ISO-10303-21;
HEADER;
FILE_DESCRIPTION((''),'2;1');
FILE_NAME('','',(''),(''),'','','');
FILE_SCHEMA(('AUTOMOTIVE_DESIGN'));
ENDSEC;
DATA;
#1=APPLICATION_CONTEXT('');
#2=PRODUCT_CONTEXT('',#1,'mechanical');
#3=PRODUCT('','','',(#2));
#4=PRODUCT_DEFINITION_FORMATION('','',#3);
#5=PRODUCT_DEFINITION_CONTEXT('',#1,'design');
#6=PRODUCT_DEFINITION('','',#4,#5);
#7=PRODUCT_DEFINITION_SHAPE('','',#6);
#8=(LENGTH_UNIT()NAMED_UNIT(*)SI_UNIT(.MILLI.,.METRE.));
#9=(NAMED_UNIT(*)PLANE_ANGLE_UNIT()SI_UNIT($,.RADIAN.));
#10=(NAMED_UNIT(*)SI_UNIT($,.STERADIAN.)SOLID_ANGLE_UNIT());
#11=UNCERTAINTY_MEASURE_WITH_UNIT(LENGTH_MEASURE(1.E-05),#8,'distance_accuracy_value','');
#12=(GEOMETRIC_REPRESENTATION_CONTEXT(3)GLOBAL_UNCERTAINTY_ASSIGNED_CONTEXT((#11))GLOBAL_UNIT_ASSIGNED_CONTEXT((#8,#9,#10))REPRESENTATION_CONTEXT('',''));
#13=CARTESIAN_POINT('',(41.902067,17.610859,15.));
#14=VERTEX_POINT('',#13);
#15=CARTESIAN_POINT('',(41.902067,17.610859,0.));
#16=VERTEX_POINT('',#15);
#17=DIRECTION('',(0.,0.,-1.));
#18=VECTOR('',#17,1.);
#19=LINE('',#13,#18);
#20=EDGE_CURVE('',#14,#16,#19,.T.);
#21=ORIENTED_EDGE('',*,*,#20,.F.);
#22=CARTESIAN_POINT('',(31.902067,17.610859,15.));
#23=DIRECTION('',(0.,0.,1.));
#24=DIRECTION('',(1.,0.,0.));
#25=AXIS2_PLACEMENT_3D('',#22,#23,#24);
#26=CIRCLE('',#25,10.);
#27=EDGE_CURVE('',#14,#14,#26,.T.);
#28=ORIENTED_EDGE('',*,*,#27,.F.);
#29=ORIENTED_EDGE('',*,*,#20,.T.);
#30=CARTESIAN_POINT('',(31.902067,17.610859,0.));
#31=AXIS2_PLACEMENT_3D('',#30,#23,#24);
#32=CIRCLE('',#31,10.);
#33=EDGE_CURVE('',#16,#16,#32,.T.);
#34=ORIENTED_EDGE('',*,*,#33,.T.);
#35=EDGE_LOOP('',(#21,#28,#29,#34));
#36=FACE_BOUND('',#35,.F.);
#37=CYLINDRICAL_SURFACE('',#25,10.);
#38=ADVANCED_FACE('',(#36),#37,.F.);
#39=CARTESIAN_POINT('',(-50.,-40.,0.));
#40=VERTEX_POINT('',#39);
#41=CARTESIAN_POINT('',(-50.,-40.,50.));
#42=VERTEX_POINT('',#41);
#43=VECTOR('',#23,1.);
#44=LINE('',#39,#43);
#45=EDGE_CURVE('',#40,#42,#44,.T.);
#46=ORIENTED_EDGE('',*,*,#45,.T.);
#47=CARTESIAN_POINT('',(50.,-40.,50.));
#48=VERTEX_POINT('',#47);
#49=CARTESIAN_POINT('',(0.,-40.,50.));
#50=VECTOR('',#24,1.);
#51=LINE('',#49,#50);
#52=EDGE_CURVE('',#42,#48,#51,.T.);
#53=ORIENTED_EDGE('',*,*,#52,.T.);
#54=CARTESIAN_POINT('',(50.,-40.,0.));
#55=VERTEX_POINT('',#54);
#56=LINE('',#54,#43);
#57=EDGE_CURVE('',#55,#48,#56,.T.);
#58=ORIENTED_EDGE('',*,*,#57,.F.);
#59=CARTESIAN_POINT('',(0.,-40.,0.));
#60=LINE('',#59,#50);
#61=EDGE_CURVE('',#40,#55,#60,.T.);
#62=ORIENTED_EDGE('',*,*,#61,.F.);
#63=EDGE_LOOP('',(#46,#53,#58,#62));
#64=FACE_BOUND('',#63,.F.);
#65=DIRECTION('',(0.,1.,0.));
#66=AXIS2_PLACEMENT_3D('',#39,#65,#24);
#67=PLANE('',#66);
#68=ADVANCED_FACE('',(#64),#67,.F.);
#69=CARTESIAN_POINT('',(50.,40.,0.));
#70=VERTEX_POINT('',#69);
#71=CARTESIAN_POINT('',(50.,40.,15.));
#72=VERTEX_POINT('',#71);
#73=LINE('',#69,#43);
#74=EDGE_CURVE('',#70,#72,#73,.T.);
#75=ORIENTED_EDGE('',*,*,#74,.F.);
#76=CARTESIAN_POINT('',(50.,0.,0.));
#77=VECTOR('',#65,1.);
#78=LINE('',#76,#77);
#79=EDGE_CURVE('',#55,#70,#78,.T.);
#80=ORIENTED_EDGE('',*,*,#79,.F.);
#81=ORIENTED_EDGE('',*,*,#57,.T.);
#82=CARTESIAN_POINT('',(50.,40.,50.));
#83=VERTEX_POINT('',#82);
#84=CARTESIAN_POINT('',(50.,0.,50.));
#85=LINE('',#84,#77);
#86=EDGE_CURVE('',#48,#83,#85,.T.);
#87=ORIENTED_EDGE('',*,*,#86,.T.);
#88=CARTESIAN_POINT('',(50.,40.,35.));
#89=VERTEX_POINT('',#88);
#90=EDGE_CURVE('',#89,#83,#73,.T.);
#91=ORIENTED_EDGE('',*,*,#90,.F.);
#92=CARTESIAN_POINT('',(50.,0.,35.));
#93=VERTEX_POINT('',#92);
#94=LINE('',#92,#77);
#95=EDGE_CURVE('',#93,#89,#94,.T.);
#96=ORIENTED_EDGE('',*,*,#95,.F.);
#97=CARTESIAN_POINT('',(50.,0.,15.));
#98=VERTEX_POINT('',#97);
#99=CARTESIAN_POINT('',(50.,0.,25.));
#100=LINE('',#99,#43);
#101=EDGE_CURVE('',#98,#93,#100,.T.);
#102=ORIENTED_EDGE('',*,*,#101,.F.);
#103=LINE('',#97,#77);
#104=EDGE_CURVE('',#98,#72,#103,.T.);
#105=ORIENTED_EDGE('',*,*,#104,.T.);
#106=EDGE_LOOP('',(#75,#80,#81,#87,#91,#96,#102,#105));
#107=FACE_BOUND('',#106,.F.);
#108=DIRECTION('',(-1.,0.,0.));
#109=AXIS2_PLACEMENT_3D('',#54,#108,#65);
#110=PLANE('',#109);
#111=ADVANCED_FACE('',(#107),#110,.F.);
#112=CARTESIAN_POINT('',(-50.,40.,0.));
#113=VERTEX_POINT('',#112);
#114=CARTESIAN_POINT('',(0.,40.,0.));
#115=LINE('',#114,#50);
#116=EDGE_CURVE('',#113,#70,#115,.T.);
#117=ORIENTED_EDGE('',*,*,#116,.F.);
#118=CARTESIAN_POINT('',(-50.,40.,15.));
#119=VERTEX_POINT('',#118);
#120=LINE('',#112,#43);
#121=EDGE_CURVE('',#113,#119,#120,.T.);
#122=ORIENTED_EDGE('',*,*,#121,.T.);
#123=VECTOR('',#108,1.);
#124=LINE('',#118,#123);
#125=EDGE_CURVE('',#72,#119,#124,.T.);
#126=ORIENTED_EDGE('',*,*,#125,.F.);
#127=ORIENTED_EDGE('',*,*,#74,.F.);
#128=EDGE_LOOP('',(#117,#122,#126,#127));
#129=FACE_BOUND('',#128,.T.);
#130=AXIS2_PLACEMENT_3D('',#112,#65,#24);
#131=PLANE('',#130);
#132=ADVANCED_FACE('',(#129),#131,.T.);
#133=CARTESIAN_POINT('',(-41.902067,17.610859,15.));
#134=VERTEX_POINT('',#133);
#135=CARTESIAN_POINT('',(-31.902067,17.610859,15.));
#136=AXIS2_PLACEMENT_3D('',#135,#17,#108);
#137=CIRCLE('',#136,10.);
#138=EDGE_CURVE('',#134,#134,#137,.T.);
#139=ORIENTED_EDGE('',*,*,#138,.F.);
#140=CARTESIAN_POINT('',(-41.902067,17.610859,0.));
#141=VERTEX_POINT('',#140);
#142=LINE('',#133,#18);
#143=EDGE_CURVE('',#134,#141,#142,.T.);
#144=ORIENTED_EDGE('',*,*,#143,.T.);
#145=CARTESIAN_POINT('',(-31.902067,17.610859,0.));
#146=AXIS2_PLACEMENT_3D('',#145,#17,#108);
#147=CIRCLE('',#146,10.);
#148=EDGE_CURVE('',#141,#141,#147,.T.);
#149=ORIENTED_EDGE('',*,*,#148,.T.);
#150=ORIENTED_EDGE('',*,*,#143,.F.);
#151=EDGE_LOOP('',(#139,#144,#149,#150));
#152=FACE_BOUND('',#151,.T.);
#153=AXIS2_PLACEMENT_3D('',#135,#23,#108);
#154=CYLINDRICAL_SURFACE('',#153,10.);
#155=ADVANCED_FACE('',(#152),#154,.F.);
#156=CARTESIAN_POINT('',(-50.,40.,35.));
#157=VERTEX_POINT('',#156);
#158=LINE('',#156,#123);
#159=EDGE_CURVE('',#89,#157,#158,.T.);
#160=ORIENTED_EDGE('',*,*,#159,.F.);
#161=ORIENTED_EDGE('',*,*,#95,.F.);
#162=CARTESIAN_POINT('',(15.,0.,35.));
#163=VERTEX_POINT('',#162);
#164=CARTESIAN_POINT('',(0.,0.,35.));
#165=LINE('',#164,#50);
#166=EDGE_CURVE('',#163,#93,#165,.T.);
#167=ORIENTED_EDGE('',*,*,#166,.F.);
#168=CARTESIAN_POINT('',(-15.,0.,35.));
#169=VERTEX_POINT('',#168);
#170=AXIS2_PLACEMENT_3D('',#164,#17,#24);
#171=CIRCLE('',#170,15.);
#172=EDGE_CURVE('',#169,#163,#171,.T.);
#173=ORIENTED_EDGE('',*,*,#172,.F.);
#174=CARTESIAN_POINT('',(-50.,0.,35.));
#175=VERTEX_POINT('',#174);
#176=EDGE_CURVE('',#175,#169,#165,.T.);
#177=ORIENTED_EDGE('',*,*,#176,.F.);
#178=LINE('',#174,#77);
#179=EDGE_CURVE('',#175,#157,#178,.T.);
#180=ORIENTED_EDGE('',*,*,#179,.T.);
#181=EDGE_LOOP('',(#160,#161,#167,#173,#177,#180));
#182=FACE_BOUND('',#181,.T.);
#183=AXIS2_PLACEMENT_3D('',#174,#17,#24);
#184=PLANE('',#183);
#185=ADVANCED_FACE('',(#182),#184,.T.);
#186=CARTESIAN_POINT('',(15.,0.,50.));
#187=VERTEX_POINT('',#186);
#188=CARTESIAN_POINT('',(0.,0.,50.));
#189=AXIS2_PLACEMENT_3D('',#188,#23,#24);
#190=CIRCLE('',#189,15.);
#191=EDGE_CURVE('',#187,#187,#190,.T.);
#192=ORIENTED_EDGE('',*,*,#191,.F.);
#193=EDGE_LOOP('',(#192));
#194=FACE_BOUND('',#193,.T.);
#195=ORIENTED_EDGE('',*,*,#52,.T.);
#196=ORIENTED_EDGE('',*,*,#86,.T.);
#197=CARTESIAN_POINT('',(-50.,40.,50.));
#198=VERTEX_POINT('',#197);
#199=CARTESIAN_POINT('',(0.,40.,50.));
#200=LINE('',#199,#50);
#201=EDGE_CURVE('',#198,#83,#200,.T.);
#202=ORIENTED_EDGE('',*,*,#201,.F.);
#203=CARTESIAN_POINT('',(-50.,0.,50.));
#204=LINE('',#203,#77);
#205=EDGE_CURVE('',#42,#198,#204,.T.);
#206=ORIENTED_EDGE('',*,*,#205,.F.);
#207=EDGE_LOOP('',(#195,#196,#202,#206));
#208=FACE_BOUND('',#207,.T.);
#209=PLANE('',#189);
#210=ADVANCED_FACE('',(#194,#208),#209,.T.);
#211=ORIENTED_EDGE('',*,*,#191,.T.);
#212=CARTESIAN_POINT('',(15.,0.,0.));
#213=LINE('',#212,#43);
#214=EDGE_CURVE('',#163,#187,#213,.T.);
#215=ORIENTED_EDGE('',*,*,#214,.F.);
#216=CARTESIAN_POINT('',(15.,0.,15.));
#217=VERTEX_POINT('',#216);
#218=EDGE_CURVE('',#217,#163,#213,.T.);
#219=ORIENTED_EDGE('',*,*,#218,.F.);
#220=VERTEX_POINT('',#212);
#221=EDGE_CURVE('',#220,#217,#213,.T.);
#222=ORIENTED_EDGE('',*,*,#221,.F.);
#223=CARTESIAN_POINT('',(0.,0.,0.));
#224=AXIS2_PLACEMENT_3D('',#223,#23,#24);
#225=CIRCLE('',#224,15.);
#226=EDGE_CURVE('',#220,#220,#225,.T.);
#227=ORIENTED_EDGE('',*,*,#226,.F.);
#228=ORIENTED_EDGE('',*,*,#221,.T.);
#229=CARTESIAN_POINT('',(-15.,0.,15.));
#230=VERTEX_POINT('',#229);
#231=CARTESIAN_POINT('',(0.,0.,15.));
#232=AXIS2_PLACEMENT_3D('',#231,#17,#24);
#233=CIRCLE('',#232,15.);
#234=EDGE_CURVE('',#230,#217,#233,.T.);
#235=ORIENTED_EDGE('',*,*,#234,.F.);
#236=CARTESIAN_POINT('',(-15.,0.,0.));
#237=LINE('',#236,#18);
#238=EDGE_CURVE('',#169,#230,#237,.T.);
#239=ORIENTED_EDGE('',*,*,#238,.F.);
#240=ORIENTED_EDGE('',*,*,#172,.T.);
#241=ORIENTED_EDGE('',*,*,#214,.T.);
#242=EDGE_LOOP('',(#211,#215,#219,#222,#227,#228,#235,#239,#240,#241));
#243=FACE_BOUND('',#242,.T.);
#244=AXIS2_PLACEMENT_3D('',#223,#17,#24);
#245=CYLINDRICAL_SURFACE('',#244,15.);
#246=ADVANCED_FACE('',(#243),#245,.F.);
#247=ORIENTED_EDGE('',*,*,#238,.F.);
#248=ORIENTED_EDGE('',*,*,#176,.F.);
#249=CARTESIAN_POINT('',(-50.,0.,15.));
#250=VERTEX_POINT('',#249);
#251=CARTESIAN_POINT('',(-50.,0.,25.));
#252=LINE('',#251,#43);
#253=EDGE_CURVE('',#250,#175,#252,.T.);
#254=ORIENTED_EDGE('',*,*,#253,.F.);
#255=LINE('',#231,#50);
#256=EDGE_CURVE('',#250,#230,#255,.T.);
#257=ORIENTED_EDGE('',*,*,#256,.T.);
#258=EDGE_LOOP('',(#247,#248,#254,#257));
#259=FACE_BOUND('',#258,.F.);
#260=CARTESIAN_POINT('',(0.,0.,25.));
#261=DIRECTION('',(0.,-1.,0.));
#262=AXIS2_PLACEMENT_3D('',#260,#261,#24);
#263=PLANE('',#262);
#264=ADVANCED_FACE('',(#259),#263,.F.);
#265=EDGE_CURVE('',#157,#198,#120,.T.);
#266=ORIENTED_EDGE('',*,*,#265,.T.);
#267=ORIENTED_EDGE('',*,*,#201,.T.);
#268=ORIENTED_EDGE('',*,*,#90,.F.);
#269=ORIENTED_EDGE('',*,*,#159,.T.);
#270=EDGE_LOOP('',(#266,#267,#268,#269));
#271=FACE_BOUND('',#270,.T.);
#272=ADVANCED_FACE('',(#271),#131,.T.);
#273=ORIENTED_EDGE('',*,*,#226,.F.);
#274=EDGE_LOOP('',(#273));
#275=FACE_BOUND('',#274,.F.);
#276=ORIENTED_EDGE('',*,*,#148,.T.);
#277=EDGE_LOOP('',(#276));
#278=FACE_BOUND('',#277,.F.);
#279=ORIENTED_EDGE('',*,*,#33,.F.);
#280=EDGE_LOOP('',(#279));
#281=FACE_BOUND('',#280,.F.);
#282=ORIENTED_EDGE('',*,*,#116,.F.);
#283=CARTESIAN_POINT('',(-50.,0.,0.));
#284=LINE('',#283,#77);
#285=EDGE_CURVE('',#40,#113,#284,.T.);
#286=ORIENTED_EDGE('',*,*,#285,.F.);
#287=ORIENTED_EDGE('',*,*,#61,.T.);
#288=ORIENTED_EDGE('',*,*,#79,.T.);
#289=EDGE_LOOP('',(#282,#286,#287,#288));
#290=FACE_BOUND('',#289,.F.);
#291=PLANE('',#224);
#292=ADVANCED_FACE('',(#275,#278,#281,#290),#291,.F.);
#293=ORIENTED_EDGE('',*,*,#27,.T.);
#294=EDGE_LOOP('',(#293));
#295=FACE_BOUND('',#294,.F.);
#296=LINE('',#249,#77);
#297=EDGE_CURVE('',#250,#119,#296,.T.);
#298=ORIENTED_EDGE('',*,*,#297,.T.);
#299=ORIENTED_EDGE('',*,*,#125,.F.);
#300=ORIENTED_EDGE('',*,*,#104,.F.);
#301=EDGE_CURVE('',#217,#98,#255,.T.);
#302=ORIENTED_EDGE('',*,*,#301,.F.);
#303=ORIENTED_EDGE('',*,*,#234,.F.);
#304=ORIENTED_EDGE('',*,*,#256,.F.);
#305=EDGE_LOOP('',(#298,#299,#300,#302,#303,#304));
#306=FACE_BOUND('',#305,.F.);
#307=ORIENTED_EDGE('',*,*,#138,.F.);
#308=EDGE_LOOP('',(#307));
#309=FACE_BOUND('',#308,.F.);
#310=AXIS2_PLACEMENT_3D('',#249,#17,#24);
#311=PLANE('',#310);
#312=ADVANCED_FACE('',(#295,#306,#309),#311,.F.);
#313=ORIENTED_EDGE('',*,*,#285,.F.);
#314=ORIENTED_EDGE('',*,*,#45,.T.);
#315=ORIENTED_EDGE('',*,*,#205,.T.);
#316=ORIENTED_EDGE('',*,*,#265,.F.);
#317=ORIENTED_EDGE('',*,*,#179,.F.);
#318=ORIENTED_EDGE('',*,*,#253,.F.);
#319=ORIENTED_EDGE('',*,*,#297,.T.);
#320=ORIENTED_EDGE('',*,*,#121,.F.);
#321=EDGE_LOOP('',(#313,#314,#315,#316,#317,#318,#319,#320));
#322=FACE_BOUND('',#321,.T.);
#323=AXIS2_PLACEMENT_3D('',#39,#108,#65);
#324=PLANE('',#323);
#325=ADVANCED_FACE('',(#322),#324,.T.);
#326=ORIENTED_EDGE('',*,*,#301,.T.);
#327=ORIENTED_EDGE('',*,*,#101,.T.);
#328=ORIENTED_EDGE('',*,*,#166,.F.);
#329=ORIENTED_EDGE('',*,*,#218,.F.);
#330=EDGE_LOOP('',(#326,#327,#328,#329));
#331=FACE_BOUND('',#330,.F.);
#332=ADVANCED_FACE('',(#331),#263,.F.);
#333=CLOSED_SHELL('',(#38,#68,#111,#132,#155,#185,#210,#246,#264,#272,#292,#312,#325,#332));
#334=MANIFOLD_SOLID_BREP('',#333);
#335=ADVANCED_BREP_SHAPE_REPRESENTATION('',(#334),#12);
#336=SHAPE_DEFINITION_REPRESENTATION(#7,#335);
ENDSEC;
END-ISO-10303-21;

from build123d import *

# Parameters (mm, degrees)
F0_W     = 100
F0_H     = 80
F0_R     = 15
F1_DEPTH = 50
F2_W     = 100
F2_H     = 20
F3_DEPTH = 50
F4_R     = 10
F5_DEPTH = 15


# Not quite as in the source:
# - a pattern or mirror of a feature is missing from the dataset's text; its kind, count and spacing are read off the source's solid


with BuildPart() as f1:
    # F0 (on Top) → F1 (new body)
    with BuildSketch(Plane.XY):
        Rectangle(F0_W, F0_H)
        Circle(F0_R, mode=Mode.SUBTRACT)
    extrude(amount=F1_DEPTH)

    # F2 (on Front) → F3 (cut)
    with BuildSketch(Plane.XZ):
        with Locations((0, 25)):
            Rectangle(F2_W, F2_H)
    extrude(amount=-F3_DEPTH, mode=Mode.SUBTRACT)

    # F4 (on face) → F5 (cut, through all)
    with BuildSketch(Plane.XY.offset(15)):
        with Locations((31.9020673633, 17.6108591259)):
            Circle(F4_R)
    f5 = extrude(amount=-F5_DEPTH, mode=Mode.SUBTRACT)

    # F5_copies: F5 across plane
    add(f5.mirror(Plane(origin=(0, 0, 0), x_dir=(0, 0, -1), z_dir=(-1, 0, 0))), mode=Mode.SUBTRACT)


solid = f1.part
